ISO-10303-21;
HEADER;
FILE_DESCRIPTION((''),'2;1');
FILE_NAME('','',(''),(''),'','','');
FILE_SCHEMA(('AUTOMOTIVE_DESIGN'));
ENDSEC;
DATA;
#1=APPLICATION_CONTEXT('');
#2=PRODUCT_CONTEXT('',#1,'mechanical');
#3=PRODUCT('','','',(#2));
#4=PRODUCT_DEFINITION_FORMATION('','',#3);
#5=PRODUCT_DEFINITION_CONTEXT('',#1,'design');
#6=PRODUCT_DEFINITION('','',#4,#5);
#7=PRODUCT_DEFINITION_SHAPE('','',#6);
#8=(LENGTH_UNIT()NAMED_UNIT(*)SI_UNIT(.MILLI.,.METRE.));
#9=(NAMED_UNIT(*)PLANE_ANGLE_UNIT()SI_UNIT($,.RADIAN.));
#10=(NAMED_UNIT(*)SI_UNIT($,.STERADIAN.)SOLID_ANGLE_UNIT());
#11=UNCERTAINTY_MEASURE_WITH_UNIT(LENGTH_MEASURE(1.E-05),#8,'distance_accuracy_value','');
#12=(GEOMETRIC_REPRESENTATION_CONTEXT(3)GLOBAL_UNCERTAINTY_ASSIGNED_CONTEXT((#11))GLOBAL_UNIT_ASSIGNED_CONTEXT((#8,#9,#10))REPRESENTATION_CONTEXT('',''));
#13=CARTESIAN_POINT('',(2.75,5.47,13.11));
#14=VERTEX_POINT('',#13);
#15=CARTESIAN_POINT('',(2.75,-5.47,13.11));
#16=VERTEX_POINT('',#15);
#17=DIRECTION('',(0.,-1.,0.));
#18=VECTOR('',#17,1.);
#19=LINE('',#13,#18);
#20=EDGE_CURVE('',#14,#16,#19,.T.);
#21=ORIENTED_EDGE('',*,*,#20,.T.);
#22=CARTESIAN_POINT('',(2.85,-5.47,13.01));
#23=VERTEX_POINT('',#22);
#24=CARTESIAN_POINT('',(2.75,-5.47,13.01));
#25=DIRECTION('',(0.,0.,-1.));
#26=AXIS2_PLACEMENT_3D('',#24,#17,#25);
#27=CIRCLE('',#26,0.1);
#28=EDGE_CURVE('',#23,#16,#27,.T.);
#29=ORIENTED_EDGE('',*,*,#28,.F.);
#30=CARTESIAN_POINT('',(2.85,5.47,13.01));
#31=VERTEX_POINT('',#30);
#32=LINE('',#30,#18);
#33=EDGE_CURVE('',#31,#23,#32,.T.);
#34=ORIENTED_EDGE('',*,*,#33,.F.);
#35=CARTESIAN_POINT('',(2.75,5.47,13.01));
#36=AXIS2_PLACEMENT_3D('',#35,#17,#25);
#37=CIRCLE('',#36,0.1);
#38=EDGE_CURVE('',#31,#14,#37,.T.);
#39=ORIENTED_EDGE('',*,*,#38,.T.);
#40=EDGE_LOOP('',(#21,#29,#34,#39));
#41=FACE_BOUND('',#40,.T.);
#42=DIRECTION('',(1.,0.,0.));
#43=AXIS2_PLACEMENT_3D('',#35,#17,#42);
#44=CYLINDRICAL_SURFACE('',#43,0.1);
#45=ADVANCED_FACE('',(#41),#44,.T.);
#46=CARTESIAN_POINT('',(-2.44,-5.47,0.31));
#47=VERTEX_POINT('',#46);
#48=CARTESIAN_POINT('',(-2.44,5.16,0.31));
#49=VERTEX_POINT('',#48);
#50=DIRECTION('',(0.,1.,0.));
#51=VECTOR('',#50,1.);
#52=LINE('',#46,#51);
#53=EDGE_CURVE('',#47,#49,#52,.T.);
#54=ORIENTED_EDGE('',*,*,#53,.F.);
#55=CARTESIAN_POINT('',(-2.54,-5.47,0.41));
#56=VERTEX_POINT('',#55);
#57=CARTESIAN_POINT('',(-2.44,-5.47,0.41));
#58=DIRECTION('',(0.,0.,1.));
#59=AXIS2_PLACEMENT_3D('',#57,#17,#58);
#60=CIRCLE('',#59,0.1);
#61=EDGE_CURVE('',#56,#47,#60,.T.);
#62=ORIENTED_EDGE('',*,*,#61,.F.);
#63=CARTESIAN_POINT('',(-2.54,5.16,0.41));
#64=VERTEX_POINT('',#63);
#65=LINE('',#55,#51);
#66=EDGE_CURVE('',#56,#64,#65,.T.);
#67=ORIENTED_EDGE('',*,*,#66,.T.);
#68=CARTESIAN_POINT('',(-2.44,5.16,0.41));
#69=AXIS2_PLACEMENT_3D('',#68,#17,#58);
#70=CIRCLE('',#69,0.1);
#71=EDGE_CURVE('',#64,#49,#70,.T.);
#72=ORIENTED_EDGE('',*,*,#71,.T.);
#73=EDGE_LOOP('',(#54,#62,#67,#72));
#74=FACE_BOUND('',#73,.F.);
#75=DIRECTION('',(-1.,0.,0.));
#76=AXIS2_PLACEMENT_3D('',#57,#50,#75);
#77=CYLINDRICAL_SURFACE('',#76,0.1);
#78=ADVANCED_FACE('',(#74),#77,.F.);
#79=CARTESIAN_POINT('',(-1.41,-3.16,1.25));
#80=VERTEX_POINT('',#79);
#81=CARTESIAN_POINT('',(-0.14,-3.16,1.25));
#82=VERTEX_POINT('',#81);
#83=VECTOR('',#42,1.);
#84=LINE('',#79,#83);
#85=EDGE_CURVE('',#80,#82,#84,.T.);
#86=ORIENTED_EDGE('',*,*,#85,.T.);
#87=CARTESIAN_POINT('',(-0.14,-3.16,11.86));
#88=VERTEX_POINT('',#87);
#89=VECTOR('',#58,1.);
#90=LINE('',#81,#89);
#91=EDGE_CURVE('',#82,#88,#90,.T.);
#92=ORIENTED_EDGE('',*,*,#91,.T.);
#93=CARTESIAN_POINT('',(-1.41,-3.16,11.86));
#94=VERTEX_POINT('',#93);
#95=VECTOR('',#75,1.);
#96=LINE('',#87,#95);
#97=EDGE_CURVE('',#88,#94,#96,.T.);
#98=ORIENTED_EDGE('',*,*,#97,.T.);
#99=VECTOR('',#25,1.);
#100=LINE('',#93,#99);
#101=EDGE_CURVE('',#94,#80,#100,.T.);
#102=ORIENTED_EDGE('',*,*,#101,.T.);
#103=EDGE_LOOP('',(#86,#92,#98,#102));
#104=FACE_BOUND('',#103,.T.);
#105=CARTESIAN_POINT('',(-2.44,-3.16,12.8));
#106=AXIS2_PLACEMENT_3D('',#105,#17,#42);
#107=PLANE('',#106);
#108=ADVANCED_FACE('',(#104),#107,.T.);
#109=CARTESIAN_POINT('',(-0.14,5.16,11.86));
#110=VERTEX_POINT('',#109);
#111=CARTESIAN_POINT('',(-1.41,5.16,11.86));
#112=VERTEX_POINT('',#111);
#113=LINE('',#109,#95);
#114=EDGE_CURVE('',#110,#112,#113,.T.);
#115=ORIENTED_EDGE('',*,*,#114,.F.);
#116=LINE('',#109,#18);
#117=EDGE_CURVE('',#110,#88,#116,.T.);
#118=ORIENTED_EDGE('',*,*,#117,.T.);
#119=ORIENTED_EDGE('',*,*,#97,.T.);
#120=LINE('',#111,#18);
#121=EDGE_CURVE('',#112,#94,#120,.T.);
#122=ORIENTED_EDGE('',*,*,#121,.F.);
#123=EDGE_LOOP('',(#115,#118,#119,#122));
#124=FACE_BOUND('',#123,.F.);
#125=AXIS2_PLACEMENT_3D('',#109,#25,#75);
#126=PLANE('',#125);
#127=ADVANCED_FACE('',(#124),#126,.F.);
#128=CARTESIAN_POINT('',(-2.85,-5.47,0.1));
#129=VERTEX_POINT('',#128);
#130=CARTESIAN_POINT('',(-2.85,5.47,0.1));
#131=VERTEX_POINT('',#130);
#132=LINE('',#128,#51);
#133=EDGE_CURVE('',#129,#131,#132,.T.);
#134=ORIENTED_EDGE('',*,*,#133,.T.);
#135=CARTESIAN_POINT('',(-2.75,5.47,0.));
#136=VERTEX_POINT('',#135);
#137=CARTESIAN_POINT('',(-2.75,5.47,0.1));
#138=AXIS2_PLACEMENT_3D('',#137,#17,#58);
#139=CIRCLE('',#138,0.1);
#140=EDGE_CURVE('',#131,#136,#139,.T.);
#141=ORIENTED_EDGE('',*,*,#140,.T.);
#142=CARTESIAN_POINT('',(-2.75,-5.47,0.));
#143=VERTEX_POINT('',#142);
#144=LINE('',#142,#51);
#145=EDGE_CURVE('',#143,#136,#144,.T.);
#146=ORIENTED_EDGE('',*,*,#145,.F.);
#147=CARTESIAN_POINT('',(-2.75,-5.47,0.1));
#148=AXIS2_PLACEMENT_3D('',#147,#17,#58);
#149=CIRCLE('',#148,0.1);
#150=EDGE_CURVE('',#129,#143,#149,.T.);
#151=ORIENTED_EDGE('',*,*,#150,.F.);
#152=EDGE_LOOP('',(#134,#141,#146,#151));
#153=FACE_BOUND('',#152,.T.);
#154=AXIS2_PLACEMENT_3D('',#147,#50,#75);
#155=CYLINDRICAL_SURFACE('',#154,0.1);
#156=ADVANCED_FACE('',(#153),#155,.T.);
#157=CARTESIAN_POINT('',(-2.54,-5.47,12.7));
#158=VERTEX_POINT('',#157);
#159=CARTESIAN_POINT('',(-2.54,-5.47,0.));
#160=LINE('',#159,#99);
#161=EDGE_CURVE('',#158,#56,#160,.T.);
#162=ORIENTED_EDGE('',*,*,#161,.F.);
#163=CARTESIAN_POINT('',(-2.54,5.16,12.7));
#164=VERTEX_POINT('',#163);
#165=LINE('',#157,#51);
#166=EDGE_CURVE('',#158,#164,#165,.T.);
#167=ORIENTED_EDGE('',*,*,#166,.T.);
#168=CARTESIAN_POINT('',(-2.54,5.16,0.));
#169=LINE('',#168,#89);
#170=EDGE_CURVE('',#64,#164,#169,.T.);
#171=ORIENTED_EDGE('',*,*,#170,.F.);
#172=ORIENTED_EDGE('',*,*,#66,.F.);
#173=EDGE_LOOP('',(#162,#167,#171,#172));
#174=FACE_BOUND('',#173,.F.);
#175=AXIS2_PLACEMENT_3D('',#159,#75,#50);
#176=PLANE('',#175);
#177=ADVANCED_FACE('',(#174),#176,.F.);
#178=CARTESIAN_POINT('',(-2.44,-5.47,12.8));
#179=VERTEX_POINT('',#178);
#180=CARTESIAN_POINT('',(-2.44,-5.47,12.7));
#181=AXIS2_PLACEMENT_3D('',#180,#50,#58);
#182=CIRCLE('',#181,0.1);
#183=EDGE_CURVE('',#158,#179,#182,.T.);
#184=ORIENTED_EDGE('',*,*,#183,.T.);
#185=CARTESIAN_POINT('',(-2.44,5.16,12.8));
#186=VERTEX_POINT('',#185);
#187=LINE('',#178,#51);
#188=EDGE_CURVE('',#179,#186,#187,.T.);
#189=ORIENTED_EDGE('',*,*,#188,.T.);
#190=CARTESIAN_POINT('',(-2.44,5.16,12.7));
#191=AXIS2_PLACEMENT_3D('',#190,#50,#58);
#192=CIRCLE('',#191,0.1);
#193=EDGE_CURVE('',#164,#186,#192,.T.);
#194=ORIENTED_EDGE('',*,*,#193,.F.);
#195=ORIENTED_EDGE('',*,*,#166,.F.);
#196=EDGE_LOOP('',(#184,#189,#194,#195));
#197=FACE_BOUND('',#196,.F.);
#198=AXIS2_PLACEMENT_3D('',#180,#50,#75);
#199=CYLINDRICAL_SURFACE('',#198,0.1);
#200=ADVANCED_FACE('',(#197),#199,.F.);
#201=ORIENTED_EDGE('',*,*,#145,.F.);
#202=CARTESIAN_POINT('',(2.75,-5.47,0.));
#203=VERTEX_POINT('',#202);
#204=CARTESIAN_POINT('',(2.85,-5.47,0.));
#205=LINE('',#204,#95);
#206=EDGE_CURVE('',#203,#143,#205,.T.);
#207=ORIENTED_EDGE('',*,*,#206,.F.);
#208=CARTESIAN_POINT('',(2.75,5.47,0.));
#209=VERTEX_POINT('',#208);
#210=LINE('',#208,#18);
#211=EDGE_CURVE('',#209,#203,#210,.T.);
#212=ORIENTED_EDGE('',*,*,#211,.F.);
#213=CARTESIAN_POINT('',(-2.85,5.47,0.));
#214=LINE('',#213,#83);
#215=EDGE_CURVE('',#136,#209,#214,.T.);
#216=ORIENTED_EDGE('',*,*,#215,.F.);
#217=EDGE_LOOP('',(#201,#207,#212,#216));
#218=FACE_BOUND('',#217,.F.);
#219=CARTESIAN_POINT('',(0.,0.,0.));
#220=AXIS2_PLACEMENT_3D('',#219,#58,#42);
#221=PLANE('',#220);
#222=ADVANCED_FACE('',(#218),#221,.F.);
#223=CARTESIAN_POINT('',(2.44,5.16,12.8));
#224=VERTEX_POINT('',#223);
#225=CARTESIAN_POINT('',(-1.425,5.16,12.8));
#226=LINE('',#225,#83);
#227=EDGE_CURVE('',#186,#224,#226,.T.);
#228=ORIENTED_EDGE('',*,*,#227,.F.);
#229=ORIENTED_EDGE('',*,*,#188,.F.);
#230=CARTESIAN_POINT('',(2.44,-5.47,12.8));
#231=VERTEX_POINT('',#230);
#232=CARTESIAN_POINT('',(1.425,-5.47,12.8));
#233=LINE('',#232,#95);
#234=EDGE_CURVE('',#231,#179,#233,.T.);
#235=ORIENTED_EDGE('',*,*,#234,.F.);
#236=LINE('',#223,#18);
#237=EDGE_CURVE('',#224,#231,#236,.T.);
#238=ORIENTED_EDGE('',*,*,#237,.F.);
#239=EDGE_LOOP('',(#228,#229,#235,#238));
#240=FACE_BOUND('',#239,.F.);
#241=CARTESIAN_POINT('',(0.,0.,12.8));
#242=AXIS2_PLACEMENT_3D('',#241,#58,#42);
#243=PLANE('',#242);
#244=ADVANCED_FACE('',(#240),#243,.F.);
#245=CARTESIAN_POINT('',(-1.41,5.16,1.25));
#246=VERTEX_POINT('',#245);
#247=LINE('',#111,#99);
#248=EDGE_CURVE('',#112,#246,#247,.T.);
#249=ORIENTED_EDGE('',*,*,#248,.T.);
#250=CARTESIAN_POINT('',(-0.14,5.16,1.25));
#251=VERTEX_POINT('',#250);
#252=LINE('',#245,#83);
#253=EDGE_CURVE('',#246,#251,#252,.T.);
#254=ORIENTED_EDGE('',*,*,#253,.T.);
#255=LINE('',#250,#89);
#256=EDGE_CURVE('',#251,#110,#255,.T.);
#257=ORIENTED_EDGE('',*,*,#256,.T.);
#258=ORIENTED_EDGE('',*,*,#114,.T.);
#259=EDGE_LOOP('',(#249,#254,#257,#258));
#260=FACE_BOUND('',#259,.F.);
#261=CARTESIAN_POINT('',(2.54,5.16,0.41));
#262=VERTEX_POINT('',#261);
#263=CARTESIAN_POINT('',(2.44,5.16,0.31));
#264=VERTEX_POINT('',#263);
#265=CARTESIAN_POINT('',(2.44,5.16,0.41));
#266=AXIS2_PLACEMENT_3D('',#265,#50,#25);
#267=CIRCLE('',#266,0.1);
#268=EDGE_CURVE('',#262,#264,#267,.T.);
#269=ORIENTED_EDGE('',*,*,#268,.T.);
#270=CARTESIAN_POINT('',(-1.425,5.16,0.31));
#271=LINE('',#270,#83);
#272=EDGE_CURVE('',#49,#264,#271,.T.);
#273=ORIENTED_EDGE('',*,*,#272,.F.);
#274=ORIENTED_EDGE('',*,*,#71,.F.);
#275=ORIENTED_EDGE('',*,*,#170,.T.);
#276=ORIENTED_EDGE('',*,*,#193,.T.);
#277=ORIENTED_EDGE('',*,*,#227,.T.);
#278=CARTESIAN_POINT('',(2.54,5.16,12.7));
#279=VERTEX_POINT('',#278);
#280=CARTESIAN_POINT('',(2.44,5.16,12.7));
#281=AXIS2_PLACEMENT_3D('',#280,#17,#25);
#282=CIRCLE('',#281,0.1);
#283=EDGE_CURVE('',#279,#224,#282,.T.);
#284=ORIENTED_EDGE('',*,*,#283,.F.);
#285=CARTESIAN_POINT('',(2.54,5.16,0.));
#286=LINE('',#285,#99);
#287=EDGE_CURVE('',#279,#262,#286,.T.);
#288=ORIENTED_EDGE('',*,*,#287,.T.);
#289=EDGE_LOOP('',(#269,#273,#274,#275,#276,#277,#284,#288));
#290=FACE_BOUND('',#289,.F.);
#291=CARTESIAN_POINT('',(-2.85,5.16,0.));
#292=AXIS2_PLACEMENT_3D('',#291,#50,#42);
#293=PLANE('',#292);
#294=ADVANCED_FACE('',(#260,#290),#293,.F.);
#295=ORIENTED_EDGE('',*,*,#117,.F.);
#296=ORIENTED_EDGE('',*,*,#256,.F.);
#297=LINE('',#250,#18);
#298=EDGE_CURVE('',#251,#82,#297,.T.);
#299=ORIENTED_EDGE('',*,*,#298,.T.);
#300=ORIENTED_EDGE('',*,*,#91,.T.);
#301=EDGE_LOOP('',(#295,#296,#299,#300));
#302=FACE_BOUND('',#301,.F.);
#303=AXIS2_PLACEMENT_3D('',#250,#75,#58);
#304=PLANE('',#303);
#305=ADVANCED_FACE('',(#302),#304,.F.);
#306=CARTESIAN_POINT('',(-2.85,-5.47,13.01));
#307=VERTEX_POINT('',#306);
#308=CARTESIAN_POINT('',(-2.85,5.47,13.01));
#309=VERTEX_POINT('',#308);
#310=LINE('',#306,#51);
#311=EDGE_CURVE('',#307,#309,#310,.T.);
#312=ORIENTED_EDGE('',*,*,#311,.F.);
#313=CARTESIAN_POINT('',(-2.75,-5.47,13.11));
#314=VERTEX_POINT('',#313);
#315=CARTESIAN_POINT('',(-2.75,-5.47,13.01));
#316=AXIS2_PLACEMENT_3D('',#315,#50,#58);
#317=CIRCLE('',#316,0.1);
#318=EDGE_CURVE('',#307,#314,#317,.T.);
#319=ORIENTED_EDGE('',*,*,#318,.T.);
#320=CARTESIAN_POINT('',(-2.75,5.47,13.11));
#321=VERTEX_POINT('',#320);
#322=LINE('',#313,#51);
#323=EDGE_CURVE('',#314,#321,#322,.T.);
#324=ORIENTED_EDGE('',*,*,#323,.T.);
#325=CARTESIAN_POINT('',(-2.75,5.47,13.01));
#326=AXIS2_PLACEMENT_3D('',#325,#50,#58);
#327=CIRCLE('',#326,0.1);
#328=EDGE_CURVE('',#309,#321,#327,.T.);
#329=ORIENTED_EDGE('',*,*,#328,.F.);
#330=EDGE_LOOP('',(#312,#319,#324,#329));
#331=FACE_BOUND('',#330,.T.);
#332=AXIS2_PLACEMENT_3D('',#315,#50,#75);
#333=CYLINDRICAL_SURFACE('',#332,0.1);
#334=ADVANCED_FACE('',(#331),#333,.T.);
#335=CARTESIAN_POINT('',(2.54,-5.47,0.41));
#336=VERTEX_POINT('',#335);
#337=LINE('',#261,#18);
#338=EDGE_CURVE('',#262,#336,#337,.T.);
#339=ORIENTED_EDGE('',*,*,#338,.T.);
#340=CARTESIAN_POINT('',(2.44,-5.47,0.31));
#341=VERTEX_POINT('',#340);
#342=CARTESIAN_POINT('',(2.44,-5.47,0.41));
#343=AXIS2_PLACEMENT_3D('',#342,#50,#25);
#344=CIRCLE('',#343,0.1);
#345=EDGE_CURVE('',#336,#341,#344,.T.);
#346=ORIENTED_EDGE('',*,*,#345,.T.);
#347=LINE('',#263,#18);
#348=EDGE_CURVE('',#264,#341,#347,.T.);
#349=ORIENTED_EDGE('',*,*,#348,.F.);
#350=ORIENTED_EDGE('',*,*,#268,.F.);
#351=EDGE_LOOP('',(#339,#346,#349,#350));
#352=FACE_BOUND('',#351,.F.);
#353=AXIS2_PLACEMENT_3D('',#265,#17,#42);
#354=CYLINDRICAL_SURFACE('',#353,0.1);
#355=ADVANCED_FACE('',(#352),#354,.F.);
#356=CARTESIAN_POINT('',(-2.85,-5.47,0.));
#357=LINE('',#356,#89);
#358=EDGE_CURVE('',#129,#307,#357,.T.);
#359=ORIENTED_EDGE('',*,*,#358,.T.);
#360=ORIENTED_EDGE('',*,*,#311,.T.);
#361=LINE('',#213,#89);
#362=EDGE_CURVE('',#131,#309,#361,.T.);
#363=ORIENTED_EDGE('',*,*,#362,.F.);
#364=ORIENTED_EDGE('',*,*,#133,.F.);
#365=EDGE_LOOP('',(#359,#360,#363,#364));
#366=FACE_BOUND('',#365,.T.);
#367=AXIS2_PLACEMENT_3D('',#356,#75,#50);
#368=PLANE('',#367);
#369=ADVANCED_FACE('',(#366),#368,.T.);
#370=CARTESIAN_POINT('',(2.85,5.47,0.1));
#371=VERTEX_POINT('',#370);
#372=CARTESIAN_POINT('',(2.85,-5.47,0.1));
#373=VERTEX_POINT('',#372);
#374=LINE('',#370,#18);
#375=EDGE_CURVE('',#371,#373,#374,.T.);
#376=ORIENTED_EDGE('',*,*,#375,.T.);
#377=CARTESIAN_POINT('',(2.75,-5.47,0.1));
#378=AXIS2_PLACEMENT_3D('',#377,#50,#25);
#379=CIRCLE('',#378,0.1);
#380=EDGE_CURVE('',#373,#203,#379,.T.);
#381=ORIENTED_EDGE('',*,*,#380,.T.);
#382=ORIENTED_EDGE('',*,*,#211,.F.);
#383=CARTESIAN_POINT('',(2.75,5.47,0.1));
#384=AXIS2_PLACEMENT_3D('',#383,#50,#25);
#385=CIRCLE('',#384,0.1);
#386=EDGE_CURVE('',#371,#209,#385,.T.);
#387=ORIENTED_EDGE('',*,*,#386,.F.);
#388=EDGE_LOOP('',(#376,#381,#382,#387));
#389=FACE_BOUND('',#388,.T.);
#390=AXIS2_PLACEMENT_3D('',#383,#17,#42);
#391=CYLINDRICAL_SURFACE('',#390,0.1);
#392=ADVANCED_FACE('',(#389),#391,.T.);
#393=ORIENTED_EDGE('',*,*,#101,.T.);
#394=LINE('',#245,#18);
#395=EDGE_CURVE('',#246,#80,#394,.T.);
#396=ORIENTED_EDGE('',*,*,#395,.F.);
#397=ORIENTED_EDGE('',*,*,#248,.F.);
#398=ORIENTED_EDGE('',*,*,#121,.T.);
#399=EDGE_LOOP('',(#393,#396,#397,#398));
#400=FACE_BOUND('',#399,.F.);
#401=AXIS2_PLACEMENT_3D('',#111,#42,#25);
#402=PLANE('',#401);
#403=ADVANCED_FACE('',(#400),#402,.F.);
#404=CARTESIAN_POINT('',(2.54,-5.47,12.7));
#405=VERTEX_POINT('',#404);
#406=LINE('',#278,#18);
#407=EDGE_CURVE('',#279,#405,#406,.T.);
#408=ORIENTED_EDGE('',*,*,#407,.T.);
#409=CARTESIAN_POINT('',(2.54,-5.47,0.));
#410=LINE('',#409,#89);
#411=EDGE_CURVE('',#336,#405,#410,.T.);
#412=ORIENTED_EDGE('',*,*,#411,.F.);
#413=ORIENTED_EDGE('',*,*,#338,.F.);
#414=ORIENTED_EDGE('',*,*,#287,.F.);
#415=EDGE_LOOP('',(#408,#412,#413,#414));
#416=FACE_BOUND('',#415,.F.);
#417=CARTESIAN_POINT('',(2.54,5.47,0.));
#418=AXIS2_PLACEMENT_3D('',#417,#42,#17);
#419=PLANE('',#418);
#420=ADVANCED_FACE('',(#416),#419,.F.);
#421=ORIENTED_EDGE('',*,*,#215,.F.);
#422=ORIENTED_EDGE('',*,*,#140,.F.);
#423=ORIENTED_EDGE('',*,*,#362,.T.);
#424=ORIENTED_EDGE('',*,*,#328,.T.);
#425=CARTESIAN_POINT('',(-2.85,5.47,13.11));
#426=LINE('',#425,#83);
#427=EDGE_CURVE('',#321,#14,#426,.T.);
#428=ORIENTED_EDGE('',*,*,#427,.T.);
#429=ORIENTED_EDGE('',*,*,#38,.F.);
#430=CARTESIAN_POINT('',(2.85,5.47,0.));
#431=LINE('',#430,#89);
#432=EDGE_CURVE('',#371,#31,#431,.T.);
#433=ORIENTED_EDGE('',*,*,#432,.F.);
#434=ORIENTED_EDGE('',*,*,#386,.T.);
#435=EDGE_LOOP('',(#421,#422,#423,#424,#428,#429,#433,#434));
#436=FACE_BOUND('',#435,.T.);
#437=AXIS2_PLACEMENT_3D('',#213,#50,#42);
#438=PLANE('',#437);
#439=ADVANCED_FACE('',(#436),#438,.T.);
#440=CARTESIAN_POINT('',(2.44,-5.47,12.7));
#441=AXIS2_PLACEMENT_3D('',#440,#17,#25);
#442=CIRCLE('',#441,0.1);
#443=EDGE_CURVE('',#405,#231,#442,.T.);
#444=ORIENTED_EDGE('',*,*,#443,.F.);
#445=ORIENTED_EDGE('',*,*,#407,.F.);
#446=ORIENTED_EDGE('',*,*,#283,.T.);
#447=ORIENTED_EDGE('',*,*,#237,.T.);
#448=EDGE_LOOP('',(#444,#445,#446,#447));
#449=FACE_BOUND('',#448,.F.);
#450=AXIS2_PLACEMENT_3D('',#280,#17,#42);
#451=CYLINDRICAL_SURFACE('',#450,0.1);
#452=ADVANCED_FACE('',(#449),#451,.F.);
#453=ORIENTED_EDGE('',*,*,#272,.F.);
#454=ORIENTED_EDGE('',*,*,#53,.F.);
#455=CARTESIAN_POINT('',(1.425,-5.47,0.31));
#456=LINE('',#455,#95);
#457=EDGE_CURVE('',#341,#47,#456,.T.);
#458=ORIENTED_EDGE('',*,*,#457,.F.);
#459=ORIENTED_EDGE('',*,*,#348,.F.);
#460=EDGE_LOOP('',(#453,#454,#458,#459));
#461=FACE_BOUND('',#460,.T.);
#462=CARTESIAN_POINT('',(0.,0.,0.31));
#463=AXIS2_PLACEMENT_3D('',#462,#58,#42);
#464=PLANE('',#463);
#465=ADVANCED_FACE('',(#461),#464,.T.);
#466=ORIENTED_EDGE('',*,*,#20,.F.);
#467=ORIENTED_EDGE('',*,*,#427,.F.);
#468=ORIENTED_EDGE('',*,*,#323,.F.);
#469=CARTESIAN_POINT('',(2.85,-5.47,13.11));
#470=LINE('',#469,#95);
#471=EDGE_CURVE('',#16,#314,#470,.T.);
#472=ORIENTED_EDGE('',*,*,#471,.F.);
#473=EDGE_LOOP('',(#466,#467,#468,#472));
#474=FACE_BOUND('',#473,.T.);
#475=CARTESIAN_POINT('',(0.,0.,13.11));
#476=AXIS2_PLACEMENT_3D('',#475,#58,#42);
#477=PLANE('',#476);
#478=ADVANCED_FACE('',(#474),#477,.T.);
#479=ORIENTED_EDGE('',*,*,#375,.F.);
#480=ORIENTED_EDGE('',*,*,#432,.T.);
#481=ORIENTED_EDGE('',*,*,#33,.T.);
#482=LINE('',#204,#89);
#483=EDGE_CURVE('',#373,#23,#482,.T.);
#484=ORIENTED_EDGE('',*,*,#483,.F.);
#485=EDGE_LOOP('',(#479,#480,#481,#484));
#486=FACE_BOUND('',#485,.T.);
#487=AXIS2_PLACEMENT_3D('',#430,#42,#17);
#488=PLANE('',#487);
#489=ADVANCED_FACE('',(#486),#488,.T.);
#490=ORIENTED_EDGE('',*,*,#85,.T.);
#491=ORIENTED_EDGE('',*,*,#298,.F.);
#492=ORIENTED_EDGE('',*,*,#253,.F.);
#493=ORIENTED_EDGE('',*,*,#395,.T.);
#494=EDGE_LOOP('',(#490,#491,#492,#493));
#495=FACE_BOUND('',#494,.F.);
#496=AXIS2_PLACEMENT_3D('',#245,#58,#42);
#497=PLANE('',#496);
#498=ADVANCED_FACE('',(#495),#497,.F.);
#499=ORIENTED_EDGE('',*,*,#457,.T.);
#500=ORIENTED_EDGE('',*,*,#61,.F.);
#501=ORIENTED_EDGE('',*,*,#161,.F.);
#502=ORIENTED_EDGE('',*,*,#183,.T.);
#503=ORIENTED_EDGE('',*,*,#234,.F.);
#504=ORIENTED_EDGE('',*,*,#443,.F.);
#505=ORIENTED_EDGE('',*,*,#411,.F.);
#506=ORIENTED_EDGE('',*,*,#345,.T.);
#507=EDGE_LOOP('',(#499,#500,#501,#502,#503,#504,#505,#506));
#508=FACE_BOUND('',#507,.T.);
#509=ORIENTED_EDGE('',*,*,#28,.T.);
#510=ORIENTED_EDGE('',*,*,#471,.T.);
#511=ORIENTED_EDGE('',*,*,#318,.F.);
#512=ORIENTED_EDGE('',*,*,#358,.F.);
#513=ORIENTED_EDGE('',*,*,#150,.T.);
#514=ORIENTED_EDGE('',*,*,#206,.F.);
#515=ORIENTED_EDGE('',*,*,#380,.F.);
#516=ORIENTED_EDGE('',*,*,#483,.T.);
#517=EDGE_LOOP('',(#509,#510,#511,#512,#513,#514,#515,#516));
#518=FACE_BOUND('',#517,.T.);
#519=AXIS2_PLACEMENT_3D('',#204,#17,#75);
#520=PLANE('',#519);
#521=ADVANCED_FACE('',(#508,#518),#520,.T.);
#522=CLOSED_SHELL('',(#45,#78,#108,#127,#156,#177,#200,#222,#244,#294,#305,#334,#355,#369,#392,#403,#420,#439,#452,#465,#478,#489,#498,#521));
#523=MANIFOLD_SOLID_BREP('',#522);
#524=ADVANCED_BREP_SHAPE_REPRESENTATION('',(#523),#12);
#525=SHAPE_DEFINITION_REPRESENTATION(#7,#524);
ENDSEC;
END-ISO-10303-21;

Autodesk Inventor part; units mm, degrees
ref_plane "YZ Plane" through (0, 0, 0) normal (1, 0, 0) x (0, 1, 0)
ref_plane "XZ Plane" through (0, 0, 0) normal (0, 1, 0) x (-1, 0, 0)
ref_plane "XY Plane" through (0, 0, 0) normal (0, 0, 1) x (1, 0, 0)
sketch "Skizze1" plane through (0, 0, 0) normal (0, 0, 1) x (1, 0, 0)
  line L0 (-2.85, 5.47) -> (2.85, 5.47)
  line L1 (2.85, 5.47) -> (2.85, -5.47)
  line L2 (2.85, -5.47) -> (-2.85, -5.47)
  line L3 (-2.85, -5.47) -> (-2.85, 5.47)
  line L4 (-2.85, 5.47) -> (2.85, -5.47) construction
  point P0 (0, 0)
  point P1 (0, 0)
  dimension "d0" = 5.7
  dimension "d1" = 10.94
extrude "Extrusion1" add sketch "Skizze1" along normal blind 13.11
shell "Wandung1" thickness 0.31 removed faces 1 at (0.95, -5.47, 4.37)
fillet "Rundung1" radius 0.1 8 edges at (2.85, 0, 13.11) (-2.85, 0, 13.11) (2.85, 0, 0) (-2.85, 0, 0) (2.54, -0.155, 12.8) (-2.54, -0.155, 12.8) (-2.54, -0.155, 0.31) (2.54, -0.155, 0.31)
sketch "Skizze2" plane through (-2.44, 5.16, 12.8) normal (0, -1, 0) x (1, 0, 0)
  arc A0 (4.88, -12.49) -> (4.98, -12.39) centre (4.88, -12.39) ccw construction
  line L0 (4.88, -12.39) -> (2.3, -12.39) construction
  line L1 (2.3, -12.39) -> (2.3, -11.55) construction
  line L2 (2.3, -11.55) -> (4.88, -11.55) construction
  line L3 (4.88, -11.55) -> (4.88, -12.39) construction
  arc A1 (4.98, -0.1) -> (4.88, 0) centre (4.88, -0.1) ccw construction
  line L4 (4.88, -0.1) -> (2.3, -0.1) construction
  line L5 (2.3, -0.1) -> (2.3, -0.94) construction
  line L6 (2.3, -0.94) -> (4.88, -0.94) construction
  line L7 (4.88, -0.94) -> (4.88, -0.1) construction
  line L8 (-0.1, -12.39) -> (-0.1, -0.1) construction
  line L9 (-0.1, -6.245) -> (1.03, -6.245) construction
  line L10 (2.3, -0.94) -> (1.03, -0.94)
  line L11 (1.03, -0.94) -> (1.03, -11.55)
  line L12 (1.03, -11.55) -> (2.3, -11.55)
  line L13 (2.3, -11.55) -> (2.3, -0.94)
  point P0 (2.44, -12.8)
  dimension "d6" = 2.58
  dimension "d7" = 0.84
  dimension "d8" = 2.58
  dimension "d9" = 0.84
  dimension "d10" = 1.13
extrude "Extrusion2" add sketch "Skizze2" along normal blind 8.32
properties part number "USBstick_halter"
